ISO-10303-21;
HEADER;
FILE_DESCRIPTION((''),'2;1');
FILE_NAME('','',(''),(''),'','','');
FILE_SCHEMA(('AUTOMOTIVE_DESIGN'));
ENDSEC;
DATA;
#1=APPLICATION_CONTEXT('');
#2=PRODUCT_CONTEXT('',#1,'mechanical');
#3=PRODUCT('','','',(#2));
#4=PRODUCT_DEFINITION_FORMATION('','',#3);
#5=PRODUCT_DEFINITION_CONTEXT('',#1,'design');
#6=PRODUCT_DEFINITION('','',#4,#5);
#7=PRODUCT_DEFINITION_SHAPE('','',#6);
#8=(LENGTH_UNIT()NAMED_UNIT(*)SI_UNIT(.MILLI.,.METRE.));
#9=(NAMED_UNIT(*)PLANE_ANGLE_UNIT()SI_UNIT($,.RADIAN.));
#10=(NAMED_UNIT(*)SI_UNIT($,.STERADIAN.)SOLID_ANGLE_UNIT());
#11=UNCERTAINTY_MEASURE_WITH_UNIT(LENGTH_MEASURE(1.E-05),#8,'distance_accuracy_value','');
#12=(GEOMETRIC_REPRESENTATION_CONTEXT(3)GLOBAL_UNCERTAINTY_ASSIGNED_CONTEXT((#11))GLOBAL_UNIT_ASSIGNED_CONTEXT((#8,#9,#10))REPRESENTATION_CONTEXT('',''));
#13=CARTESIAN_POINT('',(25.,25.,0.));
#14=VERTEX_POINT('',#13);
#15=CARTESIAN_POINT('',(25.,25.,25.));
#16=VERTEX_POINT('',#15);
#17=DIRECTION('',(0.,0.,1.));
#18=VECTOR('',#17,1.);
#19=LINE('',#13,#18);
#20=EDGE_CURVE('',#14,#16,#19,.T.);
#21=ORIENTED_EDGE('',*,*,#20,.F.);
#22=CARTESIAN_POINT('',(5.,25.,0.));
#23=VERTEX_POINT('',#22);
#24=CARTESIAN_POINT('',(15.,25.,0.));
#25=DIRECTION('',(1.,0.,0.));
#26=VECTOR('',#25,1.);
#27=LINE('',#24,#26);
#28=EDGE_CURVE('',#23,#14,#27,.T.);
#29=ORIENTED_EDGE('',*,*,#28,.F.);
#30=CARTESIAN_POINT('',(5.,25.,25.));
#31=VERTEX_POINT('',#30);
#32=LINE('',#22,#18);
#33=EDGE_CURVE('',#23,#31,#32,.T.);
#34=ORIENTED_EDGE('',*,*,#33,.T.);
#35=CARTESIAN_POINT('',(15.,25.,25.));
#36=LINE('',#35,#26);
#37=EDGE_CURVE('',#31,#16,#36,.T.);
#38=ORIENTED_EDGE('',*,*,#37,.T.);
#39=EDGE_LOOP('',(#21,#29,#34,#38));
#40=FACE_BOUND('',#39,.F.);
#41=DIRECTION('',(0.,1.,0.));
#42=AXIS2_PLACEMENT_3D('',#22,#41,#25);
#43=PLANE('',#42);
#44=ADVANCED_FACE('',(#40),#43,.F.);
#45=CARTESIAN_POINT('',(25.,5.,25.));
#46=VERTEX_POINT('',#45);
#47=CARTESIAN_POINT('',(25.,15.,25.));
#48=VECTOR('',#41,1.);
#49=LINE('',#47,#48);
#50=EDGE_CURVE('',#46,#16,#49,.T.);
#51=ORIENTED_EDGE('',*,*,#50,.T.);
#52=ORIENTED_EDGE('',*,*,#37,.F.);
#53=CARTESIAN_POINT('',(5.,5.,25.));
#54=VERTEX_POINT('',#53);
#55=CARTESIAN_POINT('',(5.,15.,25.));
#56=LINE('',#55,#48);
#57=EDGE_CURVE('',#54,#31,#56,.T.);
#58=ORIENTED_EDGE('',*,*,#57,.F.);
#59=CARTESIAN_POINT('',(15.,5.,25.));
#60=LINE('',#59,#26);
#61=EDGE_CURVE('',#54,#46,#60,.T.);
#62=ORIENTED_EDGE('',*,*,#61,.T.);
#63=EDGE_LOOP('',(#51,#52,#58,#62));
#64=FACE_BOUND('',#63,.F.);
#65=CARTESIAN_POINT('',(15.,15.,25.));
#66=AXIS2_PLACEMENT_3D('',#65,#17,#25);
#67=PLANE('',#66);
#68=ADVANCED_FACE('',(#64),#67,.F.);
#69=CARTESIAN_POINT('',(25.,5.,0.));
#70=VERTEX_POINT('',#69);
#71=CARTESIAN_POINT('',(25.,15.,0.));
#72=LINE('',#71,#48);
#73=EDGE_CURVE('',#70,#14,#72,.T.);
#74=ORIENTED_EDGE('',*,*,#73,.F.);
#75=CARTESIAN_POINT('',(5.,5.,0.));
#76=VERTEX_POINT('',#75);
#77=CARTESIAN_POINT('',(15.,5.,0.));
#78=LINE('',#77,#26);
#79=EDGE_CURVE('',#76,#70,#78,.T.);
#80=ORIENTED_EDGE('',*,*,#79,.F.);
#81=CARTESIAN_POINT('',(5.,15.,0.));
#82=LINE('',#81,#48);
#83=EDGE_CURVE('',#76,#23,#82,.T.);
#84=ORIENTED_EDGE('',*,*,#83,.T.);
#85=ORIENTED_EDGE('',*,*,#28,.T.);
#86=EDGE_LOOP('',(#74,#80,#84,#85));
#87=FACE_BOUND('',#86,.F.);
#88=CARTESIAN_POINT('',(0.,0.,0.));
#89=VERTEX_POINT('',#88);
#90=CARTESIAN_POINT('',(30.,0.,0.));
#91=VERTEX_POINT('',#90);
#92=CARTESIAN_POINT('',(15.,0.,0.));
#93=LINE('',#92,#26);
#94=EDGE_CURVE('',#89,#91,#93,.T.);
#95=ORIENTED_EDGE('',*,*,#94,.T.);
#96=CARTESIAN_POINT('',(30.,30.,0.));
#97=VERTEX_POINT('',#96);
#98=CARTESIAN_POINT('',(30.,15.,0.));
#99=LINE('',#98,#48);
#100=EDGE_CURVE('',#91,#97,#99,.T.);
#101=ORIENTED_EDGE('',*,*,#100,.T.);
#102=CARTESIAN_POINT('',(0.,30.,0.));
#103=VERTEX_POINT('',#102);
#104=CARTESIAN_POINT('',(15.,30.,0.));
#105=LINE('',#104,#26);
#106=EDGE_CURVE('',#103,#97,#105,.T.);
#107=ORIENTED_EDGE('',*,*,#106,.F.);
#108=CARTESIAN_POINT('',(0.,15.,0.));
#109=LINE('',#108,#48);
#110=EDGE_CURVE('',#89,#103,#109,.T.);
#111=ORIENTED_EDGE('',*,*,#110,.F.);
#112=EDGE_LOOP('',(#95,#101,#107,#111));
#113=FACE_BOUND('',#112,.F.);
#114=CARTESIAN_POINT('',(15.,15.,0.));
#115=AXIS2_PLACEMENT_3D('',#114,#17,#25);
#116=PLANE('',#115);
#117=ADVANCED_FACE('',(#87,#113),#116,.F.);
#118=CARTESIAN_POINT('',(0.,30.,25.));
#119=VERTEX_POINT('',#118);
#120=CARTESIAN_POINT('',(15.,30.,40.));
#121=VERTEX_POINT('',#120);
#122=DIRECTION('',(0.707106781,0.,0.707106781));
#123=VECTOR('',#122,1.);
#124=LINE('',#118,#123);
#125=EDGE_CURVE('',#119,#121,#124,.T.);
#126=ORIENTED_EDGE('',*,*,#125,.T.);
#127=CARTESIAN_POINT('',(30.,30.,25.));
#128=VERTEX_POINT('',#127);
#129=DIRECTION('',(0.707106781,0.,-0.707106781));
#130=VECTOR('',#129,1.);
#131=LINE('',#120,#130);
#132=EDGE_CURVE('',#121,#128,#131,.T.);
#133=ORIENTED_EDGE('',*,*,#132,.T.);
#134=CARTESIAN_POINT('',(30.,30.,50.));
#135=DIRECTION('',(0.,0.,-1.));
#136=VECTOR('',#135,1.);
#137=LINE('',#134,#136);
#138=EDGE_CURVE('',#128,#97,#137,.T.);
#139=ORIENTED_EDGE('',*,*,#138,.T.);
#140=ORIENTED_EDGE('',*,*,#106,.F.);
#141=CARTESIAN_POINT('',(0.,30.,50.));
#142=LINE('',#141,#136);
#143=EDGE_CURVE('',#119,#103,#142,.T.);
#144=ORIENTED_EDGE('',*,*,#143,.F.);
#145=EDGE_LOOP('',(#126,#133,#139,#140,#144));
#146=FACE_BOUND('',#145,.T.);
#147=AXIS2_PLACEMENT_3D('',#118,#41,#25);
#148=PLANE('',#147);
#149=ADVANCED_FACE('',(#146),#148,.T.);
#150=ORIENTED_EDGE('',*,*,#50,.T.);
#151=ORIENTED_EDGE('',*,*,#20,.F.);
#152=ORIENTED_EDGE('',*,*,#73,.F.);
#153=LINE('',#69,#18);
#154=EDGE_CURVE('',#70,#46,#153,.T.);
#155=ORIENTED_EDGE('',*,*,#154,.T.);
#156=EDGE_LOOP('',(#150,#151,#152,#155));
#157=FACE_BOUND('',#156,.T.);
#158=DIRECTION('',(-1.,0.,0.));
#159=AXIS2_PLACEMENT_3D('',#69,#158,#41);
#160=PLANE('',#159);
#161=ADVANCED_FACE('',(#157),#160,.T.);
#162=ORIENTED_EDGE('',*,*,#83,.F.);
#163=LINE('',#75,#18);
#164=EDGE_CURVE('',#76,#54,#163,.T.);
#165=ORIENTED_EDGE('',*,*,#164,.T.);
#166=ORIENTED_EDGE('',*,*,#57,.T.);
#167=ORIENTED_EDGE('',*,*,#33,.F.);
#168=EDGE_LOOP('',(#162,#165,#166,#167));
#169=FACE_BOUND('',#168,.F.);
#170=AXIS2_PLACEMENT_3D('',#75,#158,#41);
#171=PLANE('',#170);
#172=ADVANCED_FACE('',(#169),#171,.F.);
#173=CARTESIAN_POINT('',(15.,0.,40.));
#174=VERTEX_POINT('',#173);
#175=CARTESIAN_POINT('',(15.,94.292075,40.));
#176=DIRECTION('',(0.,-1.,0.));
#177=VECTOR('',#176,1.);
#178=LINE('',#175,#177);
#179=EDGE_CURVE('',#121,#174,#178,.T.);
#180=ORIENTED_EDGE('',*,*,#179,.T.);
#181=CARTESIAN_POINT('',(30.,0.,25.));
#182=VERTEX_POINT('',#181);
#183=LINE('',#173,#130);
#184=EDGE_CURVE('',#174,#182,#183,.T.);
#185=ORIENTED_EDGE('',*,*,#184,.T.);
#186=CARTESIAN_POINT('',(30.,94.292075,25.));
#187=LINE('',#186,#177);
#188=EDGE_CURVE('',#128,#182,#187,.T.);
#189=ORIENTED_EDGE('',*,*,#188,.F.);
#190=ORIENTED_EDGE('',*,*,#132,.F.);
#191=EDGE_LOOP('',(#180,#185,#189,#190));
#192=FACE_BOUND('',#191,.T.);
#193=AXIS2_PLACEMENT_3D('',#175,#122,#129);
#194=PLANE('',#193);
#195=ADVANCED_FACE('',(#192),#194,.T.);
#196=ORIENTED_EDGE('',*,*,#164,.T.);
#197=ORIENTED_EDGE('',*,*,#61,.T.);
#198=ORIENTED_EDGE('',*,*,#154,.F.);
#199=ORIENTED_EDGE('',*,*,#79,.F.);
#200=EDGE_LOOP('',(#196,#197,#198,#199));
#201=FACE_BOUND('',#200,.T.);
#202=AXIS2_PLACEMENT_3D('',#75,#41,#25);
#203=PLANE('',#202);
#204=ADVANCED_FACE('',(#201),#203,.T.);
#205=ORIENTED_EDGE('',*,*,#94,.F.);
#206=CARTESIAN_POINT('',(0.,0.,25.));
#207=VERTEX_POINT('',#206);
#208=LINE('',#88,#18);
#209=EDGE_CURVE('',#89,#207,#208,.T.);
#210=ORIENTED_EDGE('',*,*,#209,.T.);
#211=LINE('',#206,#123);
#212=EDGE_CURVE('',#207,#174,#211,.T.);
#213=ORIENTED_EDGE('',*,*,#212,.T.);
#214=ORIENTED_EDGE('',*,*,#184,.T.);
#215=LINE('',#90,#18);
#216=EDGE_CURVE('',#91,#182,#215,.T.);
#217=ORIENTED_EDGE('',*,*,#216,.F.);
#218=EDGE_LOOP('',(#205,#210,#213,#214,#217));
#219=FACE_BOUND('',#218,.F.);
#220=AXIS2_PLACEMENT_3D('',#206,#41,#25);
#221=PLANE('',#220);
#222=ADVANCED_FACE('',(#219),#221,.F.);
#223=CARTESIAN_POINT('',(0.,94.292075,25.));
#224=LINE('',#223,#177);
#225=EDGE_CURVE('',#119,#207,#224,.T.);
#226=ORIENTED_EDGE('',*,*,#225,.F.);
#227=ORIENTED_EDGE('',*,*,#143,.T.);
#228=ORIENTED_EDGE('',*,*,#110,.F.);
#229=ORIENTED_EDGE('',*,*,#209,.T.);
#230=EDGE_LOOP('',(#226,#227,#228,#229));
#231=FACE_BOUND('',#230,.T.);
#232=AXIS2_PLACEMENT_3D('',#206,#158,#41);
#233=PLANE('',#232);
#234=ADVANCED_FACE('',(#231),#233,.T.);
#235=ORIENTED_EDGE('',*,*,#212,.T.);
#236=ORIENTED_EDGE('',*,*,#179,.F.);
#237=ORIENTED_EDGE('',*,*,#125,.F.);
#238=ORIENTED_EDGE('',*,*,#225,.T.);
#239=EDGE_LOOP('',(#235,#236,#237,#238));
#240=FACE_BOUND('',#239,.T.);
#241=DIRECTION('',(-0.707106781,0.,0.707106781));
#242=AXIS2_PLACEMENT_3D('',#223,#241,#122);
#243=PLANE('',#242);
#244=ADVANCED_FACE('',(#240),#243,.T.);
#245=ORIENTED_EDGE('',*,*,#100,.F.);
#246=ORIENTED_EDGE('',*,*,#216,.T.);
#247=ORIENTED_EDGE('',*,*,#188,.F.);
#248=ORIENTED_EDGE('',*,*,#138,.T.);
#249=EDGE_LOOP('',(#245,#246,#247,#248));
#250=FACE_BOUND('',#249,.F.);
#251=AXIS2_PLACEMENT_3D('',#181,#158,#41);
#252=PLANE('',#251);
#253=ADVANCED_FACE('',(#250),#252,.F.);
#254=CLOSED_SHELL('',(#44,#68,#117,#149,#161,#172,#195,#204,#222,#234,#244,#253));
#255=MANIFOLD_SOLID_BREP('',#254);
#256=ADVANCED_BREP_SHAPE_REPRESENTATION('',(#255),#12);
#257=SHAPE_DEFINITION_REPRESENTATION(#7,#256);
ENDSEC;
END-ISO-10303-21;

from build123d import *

# Parameters (mm, degrees)
F0_W        = 30
F0_H        = 30
F0_W_2      = 20
F0_H_2      = 20
F1_DEPTH    = 25
F2_W        = 30
F2_H        = 30
F3_DEPTH    = 25
F4_T1_DEPTH = 158.5841493983


# Not quite as in the source:
# - a fillet or chamfer that OpenCascade refuses, or shapes differently, is made with other operations: its cross-section is extruded or revolved along the edge and cut away or added


with BuildPart() as f1:
    # F0 (on Top) → F1 (new body)
    with BuildSketch(Plane.XY):
        with Locations((15, 15)):
            Rectangle(F0_W, F0_H)
        with Locations((15, 15)):
            Rectangle(F0_W_2, F0_H_2, mode=Mode.SUBTRACT)
    extrude(amount=F1_DEPTH)

    # F2 (on face) → F3 (join)
    with BuildSketch(Plane.XY.offset(25)):
        with Locations((15, 15)):
            Rectangle(F2_W, F2_H)
    extrude(amount=F3_DEPTH)

    # F4: chamfer of 25 on 2 edges, made by hand

    # F4_s2 → F4_t1 (cut)
    with BuildSketch(Plane.XZ.offset(-94.2920746991)):
        Polygon((0, 25), (25, 50), (0, 50), align=None)
        Polygon((5, 50), (30, 25), (30, 50), align=None)
    extrude(amount=F4_T1_DEPTH, mode=Mode.SUBTRACT)


solid = f1.part
